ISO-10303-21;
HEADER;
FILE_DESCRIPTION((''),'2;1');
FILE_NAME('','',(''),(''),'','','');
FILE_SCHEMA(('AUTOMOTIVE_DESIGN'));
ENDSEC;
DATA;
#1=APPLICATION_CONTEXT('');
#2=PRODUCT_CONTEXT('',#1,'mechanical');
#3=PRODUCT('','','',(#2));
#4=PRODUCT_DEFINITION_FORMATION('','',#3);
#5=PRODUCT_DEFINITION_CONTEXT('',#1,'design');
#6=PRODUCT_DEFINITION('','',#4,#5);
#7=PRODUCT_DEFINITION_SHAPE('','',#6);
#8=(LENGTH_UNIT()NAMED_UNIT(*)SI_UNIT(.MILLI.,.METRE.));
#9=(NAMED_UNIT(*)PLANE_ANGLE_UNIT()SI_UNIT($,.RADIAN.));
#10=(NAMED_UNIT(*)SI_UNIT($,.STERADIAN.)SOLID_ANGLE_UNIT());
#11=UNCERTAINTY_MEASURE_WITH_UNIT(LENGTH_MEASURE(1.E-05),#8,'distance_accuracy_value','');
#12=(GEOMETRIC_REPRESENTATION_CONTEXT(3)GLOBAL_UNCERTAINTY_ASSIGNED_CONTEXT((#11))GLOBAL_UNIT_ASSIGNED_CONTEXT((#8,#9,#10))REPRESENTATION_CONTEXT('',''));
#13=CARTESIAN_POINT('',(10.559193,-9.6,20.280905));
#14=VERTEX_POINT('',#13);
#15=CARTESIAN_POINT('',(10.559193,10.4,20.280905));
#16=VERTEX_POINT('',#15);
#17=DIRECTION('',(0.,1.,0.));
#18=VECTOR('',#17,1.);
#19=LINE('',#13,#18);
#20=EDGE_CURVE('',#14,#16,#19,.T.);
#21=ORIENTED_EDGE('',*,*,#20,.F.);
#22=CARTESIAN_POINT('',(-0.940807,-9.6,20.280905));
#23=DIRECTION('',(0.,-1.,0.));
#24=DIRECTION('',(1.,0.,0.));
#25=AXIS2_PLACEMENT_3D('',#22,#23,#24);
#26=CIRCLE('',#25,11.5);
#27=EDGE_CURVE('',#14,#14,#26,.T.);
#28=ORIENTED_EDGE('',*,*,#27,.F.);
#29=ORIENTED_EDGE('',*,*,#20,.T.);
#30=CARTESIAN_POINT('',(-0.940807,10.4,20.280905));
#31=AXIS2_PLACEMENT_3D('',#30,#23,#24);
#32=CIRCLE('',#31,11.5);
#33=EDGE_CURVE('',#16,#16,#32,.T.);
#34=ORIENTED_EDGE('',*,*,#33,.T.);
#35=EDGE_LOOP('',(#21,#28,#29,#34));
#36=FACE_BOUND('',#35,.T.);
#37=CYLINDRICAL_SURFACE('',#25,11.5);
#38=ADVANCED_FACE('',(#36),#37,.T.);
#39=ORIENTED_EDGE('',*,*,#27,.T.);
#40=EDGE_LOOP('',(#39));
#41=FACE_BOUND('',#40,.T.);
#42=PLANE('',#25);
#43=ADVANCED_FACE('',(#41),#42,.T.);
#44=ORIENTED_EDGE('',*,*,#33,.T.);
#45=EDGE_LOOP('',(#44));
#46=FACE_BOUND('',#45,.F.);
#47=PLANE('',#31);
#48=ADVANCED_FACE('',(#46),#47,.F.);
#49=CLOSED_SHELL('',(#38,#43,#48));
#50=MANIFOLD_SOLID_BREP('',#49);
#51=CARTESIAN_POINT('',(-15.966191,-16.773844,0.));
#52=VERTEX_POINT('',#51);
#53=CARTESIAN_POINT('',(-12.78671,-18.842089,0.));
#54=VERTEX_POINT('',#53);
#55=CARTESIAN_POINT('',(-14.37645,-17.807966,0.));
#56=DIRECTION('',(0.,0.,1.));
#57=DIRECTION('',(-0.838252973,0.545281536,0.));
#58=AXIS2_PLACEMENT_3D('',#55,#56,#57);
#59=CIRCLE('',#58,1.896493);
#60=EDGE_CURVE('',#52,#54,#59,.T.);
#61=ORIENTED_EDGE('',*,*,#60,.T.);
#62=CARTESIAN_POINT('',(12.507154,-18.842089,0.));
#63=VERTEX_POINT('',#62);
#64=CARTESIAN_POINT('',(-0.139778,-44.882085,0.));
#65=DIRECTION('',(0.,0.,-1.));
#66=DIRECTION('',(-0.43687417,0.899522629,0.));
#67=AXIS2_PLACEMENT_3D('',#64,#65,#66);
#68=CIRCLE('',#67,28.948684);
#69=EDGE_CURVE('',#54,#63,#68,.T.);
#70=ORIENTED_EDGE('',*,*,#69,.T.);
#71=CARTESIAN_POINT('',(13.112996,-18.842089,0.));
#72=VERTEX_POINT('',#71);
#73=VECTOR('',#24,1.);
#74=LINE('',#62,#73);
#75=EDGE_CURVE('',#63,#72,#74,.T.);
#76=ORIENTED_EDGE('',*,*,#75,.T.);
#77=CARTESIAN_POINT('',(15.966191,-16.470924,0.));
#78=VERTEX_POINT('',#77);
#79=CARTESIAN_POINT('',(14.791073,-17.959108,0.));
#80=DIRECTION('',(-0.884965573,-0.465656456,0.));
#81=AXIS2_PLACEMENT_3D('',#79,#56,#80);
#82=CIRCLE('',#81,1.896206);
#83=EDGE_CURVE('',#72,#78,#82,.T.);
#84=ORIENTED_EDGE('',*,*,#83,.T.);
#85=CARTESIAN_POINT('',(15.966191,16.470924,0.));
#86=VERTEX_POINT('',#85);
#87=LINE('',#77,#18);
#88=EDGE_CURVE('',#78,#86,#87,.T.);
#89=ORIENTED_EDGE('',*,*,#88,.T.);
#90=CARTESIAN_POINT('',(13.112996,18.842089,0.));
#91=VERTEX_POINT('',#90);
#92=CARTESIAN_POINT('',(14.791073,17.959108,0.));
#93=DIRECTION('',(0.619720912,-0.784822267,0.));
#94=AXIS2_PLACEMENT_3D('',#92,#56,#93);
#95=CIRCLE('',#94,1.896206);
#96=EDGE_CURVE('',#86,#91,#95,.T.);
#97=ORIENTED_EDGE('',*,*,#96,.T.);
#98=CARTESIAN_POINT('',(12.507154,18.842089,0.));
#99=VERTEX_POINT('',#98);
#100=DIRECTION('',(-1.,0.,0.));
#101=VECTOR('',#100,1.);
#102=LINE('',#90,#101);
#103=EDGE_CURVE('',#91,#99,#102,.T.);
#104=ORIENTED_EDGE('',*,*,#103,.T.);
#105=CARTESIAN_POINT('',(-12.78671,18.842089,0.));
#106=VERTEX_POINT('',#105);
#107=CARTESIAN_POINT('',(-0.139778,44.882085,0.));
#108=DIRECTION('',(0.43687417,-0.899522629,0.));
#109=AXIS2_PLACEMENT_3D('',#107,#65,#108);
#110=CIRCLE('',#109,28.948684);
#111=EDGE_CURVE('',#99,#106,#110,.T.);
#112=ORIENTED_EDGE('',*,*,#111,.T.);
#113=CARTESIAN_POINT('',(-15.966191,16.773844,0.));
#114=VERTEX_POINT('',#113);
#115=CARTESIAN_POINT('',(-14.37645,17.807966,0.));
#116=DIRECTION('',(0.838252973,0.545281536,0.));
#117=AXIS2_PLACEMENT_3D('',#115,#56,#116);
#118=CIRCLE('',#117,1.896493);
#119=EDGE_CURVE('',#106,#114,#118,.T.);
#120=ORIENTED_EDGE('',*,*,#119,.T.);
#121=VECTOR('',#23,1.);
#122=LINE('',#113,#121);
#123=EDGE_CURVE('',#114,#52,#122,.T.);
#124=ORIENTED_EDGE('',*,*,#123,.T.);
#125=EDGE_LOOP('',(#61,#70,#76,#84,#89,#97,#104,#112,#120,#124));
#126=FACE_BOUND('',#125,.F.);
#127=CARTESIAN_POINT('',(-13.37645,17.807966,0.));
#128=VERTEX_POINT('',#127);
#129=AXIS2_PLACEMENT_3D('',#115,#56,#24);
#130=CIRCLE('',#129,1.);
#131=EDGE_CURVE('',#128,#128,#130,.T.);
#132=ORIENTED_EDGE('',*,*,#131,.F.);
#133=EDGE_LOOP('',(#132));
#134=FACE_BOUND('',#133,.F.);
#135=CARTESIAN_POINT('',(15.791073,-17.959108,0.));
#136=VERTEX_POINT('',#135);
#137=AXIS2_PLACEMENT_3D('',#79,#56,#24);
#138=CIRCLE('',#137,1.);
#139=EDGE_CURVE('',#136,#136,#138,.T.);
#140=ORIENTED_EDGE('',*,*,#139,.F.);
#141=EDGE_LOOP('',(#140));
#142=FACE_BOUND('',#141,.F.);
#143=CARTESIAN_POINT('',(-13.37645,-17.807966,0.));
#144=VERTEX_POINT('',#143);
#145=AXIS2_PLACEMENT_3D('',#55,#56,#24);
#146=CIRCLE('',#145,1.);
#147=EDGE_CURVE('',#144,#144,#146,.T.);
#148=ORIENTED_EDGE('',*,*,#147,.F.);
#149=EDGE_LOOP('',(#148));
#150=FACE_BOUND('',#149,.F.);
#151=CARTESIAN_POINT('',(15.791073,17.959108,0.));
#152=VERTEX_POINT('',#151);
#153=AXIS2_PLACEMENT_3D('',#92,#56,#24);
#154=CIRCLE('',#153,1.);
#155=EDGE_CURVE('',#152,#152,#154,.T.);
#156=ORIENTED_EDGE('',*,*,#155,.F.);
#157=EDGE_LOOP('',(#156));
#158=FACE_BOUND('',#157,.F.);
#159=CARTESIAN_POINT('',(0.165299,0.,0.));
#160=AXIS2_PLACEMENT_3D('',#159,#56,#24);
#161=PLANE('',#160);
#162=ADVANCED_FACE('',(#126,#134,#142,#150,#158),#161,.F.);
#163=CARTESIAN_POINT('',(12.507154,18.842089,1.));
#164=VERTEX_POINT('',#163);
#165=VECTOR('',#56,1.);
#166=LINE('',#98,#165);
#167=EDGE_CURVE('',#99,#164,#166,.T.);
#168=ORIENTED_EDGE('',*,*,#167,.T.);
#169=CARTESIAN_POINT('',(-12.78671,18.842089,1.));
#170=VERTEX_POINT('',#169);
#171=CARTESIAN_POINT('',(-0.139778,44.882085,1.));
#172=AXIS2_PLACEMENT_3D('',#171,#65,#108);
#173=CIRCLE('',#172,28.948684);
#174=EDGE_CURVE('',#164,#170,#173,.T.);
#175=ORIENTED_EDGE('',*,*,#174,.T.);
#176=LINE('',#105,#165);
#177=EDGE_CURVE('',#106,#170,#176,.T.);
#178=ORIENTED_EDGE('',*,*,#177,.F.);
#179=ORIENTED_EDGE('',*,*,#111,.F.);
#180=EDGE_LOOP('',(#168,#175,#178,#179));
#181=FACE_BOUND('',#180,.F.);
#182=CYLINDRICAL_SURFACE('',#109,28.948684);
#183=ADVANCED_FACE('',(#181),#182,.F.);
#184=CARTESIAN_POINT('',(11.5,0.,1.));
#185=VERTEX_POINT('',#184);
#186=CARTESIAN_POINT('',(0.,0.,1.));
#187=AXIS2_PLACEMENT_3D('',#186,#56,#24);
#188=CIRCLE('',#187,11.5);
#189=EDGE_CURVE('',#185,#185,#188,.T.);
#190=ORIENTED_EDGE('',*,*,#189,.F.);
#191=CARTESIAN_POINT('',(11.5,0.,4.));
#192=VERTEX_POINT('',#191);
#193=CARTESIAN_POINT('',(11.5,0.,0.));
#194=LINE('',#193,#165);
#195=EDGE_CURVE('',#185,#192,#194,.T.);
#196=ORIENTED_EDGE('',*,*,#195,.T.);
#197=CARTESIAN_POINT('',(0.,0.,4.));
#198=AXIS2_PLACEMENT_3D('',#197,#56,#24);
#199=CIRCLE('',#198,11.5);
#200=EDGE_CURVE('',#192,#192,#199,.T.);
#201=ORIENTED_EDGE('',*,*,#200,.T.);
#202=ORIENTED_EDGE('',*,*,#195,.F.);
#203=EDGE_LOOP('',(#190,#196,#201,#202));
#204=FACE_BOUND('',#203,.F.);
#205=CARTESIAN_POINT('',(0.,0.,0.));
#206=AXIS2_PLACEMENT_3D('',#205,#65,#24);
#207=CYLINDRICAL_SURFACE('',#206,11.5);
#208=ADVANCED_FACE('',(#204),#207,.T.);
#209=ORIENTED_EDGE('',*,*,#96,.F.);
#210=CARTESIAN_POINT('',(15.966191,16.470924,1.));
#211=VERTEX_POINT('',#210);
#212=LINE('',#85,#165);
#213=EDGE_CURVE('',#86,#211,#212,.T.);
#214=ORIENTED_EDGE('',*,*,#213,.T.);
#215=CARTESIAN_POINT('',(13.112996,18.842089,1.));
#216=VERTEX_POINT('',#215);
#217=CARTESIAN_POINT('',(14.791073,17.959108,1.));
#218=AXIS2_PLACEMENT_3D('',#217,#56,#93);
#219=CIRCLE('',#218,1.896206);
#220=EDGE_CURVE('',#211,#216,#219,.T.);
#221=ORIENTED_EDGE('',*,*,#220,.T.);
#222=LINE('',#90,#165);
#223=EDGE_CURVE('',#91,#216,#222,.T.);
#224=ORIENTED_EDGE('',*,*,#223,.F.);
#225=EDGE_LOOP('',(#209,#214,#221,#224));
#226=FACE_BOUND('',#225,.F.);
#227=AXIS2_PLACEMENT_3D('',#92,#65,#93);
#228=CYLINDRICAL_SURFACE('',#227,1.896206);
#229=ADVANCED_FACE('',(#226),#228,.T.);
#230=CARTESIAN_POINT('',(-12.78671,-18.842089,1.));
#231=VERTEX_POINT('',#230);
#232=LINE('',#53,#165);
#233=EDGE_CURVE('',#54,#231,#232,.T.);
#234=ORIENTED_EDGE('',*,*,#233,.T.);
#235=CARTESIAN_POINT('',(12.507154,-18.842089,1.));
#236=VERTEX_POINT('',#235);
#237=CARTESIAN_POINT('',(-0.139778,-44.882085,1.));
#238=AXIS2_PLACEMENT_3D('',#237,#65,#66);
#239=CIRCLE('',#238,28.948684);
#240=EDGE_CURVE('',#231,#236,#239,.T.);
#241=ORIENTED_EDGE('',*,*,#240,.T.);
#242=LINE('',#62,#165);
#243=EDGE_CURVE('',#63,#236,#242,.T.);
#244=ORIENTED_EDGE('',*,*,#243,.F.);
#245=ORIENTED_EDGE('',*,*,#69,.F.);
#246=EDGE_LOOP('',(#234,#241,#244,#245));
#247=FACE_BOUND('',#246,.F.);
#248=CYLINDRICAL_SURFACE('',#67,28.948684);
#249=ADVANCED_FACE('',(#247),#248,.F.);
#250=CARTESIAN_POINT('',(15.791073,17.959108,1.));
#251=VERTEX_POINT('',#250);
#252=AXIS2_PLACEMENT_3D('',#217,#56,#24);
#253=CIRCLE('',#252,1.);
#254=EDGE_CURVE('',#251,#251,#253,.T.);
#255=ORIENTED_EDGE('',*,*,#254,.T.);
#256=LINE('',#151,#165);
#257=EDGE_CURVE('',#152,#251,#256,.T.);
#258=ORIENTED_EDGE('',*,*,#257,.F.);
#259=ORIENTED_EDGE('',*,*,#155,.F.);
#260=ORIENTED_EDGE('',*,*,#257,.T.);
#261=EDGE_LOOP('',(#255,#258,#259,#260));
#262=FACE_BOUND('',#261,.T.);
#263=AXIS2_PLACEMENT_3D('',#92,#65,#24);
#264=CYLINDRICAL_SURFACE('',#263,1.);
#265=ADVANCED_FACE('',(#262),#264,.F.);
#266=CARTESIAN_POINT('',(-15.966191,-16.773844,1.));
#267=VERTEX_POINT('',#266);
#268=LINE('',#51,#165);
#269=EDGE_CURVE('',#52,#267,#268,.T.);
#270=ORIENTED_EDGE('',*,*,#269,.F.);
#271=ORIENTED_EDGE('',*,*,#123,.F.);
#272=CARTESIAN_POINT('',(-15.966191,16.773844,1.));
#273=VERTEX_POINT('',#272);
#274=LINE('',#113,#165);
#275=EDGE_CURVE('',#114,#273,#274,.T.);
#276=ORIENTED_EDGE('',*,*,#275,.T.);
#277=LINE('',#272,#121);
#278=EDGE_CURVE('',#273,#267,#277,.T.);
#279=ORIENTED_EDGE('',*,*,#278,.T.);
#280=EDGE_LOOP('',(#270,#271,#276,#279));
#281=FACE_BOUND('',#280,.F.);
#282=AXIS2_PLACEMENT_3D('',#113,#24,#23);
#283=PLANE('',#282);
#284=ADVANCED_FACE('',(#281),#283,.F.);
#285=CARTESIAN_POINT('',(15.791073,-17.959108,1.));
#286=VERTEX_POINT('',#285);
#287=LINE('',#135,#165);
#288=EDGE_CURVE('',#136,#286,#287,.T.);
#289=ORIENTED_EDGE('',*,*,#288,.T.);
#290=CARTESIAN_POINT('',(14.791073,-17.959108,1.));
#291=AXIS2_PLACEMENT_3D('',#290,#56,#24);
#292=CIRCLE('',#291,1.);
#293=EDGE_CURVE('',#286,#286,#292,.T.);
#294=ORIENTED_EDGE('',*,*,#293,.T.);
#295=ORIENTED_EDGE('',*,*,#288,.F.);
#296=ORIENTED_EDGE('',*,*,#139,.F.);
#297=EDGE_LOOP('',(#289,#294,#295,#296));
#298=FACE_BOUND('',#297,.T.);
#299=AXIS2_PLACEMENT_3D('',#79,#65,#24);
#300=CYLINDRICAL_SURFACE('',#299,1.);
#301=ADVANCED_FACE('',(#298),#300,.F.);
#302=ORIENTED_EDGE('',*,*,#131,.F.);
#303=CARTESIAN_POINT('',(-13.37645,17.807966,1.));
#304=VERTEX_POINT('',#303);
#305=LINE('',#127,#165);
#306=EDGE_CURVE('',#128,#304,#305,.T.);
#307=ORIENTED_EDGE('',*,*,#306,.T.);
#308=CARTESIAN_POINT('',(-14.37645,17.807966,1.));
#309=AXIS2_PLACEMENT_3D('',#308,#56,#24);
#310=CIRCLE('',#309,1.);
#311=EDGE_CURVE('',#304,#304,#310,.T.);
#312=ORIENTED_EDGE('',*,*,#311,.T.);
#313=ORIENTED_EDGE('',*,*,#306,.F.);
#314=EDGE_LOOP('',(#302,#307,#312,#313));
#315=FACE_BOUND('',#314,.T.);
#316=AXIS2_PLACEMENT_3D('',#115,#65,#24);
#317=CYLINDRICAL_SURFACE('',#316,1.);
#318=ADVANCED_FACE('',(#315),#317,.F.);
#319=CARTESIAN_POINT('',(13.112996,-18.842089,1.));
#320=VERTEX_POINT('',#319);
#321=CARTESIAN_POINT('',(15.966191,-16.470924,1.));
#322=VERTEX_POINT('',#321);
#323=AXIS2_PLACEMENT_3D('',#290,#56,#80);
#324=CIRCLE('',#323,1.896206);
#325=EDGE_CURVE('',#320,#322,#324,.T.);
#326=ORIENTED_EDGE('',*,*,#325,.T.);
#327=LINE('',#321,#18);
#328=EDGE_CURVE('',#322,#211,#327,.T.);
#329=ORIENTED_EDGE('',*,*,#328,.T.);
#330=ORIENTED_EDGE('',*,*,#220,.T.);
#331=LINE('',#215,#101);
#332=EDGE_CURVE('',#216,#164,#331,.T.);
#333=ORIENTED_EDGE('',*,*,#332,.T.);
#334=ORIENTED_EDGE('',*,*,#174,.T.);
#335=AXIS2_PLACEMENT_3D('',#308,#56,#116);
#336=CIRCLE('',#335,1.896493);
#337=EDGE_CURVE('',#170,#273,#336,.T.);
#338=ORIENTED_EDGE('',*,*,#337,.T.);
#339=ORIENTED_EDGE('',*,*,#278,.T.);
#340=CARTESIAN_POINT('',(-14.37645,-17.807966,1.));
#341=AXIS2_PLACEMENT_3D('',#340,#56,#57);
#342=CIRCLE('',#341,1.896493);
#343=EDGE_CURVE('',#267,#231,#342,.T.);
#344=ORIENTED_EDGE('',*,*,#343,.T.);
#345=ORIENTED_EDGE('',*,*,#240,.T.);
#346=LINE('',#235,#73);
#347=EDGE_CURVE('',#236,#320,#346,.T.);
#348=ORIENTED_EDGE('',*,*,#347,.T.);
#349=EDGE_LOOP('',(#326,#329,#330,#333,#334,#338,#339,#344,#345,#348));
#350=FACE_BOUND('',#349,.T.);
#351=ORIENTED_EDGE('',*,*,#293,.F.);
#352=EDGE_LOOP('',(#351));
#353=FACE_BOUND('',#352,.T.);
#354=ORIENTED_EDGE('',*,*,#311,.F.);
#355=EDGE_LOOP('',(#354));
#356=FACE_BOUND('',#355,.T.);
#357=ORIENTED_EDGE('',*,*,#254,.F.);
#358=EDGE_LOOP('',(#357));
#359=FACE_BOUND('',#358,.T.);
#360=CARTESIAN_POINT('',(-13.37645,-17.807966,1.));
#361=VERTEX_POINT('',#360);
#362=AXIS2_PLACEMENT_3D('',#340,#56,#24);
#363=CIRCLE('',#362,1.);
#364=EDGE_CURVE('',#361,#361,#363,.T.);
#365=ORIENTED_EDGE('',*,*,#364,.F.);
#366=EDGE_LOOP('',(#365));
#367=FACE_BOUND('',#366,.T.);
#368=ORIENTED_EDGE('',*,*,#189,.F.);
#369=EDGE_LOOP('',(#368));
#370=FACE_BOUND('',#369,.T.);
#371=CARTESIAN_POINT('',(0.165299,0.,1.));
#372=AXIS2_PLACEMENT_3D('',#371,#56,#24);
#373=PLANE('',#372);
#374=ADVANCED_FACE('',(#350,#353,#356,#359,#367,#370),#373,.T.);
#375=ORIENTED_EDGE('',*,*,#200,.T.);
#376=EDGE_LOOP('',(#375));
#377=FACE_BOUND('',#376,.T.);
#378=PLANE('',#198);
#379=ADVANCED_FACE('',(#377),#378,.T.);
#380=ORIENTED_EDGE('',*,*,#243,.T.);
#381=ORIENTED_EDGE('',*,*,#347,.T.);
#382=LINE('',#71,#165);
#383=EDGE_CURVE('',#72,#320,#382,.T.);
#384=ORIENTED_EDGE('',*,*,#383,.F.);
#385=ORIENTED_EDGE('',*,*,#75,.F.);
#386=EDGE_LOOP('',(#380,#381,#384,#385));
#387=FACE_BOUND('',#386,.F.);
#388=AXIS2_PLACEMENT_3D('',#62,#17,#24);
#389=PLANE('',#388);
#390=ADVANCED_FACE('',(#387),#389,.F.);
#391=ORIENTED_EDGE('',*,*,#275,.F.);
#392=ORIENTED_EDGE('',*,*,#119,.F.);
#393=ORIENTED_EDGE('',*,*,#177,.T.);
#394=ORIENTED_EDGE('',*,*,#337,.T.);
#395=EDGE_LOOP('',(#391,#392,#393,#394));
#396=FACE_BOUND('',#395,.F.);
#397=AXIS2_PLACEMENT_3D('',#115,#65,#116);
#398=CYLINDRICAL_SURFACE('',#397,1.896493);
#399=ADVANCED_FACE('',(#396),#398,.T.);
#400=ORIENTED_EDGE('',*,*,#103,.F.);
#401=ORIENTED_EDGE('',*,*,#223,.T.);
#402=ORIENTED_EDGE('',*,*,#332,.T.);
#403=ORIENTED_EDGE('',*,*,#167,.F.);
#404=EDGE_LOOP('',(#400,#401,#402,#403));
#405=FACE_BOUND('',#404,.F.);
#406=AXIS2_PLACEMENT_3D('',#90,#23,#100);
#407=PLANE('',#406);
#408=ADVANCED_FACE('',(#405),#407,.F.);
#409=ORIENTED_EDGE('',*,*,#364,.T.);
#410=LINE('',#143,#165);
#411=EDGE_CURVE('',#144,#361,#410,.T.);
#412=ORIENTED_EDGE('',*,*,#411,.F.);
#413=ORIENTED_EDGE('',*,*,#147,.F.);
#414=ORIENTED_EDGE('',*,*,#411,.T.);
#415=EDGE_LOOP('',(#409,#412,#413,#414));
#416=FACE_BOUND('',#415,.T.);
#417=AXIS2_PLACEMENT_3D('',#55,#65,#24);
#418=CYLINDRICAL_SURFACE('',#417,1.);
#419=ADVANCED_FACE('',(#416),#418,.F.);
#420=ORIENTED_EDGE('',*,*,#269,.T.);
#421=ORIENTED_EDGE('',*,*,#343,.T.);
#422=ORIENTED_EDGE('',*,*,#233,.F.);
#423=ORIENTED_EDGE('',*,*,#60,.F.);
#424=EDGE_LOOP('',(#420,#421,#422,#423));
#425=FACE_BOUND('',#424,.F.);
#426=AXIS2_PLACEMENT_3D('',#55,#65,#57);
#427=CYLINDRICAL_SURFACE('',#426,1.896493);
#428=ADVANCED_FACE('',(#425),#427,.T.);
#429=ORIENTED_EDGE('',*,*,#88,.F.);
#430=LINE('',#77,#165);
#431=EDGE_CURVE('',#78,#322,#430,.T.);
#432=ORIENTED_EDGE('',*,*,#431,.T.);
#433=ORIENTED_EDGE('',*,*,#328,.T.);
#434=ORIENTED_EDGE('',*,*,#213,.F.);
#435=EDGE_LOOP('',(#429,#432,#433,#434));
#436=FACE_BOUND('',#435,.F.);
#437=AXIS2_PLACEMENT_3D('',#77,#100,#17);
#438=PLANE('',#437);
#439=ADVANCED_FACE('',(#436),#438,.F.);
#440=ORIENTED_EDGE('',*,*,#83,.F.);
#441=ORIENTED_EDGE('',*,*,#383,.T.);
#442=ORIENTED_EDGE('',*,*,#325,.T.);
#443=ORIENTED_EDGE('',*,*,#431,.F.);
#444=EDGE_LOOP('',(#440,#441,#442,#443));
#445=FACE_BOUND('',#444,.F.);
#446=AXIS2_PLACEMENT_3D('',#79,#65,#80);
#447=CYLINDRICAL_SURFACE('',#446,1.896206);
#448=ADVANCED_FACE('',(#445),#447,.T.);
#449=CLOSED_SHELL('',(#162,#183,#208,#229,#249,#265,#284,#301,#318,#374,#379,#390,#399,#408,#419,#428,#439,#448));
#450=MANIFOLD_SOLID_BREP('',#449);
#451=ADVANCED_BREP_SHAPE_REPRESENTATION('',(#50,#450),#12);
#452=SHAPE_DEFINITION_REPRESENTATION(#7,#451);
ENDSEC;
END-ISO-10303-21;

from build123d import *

# Parameters (mm, degrees)
F0_R     = 1
F0_R_2   = 11.5
F1_DEPTH = 1
F2_DEPTH = 4
F7_START = -2
F6_R     = 11.5
F7_DEPTH = 20


# Not quite as in the source:
# - the program builds the solid bodies; features that only make, move or delete a surface that nothing else refers to are left out


with BuildPart() as f1:
    # F0 (on Top) → F1 (new body)
    with BuildSketch(Plane.XY):
        with BuildLine():
            ThreePointArc((-12.7867098571, -18.8420887816), (-0.1397777075, -15.9334011427), (12.507154442, -18.8420887816))
            Line((12.507154442, -18.8420887816), (13.112995763, -18.8420887816))
            ThreePointArc((13.112995763, -18.8420887816), (16.0030328943, -19.4174459822), (15.9661910202, -16.4709237602))
            Line((15.9661910202, -16.4709237602), (15.9661910202, 16.4709237602))
            ThreePointArc((15.9661910202, 16.4709237602), (16.0030328943, 19.4174459822), (13.112995763, 18.8420887816))
            Line((13.112995763, 18.8420887816), (12.507154442, 18.8420887816))
            ThreePointArc((12.507154442, 18.8420887816), (-0.1397777075, 15.9334011427), (-12.7867098571, 18.8420887816))
            ThreePointArc((-12.7867098571, 18.8420887816), (-15.41057285, 19.3977069518), (-15.9661910202, 16.7738439589))
            Line((-15.9661910202, 16.7738439589), (-15.9661910202, -16.7738439589))
            ThreePointArc((-15.9661910202, -16.7738439589), (-15.41057285, -19.3977069518), (-12.7867098571, -18.8420887816))
        make_face()
        with Locations((-14.3764504387, -17.8079663703)):
            Circle(F0_R, mode=Mode.SUBTRACT)
        with Locations((14.791072625, -17.9591083038)):
            Circle(F0_R, mode=Mode.SUBTRACT)
        Circle(F0_R_2, mode=Mode.SUBTRACT)
        with Locations((-14.3764504387, 17.8079663703)):
            Circle(F0_R, mode=Mode.SUBTRACT)
        with Locations((14.791072625, 17.9591083038)):
            Circle(F0_R, mode=Mode.SUBTRACT)
    extrude(amount=F1_DEPTH)

    # F0 (on Top) → F2 (join)
    with BuildSketch(Plane.XY):
        Circle(F0_R_2)
    extrude(amount=F2_DEPTH)


with BuildPart() as f7:
    # F6 (on offset) → F7 (new body)
    with BuildSketch(Plane.XZ.offset(11.6).offset(F7_START)):
        with Locations((-0.9408069891, 20.2809050679)):
            Circle(F6_R)
    extrude(amount=-F7_DEPTH)


solid = Compound([f1.part, f7.part])
